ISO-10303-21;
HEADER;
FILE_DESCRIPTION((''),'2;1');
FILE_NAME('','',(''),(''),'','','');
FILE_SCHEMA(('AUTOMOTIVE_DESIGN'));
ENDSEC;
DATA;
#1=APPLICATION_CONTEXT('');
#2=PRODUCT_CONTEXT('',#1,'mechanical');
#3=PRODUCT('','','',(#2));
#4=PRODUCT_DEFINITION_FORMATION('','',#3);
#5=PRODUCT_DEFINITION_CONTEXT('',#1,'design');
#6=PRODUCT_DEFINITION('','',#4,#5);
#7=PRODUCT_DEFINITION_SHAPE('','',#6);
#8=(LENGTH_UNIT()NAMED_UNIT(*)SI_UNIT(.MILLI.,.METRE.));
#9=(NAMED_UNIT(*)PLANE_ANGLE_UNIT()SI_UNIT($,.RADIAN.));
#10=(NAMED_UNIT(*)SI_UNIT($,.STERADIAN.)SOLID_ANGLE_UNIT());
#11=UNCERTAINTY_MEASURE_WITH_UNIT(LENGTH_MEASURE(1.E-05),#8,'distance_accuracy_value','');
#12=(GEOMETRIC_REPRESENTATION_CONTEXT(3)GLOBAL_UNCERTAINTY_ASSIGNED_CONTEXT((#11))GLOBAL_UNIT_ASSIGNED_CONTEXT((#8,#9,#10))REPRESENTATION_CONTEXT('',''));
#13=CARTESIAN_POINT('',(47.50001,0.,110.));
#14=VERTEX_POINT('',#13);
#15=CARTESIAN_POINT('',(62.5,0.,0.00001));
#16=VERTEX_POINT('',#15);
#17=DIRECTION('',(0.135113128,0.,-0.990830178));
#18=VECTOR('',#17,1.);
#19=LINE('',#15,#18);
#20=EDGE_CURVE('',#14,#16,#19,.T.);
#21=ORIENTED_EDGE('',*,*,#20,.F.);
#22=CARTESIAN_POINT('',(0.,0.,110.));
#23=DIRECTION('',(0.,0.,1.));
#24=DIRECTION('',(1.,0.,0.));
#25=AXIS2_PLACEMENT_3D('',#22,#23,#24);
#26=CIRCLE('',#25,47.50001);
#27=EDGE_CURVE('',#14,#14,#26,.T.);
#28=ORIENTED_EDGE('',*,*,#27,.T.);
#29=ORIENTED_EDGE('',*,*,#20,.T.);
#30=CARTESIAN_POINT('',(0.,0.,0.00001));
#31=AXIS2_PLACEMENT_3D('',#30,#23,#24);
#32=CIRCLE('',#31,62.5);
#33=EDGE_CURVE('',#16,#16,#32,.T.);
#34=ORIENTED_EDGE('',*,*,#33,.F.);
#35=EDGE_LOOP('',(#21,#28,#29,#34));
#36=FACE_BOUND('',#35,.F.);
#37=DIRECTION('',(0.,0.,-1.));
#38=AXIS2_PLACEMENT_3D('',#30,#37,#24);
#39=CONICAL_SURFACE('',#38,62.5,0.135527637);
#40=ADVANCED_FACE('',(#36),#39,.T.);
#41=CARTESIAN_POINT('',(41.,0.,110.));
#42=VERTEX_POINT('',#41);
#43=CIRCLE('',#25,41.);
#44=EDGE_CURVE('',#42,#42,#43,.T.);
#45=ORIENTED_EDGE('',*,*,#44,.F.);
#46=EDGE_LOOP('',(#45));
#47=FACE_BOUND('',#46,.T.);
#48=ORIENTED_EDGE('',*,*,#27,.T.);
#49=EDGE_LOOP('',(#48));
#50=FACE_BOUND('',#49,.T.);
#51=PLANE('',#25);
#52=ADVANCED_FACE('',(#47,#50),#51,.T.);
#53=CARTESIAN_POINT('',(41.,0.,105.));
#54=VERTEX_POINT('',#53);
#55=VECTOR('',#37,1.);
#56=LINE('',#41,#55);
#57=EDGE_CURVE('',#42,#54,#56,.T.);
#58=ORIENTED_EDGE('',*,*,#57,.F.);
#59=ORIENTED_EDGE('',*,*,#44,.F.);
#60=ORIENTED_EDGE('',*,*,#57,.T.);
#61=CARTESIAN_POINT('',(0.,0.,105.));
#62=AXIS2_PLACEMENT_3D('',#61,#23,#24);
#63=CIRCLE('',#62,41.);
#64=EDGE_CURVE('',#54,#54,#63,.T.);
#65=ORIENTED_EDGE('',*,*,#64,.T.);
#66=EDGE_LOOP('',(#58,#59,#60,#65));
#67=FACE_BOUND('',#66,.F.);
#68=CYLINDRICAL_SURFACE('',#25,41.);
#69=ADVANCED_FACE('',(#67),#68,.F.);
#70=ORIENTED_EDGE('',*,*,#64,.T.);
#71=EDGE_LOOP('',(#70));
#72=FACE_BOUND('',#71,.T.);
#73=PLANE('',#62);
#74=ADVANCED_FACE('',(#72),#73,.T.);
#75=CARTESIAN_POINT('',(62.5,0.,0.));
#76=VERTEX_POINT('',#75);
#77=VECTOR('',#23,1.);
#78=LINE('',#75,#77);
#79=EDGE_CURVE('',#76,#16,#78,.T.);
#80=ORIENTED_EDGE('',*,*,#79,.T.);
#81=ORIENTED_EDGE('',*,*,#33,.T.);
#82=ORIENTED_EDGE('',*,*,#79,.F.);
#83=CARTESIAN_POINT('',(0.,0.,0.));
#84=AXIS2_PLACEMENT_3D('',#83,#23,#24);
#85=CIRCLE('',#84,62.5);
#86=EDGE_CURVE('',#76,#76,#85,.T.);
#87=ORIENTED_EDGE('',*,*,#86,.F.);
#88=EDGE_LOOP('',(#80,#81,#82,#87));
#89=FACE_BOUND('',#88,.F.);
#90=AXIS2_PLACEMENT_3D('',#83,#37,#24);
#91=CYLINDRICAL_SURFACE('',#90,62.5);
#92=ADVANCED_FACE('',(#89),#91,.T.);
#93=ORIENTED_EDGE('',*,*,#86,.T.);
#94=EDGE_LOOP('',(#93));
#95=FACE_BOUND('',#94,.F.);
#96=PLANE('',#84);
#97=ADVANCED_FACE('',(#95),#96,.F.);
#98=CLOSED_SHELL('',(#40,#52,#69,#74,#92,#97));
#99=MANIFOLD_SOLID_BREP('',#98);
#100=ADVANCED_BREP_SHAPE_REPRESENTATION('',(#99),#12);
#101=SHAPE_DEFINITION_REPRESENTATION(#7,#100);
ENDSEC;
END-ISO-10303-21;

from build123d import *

# Parameters (mm, degrees)
F0_R     = 62.5
F1_DEPTH = 110
F2_SIZE2 = 109.99999
F2_SIZE  = 14.99999
F3_R     = 41
F4_DEPTH = 5


# Not quite as in the source:
# - a fillet or chamfer is up to 0.001 mm smaller than in the source, because OpenCascade refuses the exact size


with BuildPart() as f1:
    # F0 (on Top) → F1 (new body)
    with BuildSketch(Plane.XY):
        Circle(F0_R)
    extrude(amount=F1_DEPTH)

    # F2 (size 15 and 110 in the source; OpenCascade refuses exactly that, so slightly less here)
    f2_edges = [f1.edges().sort_by_distance(p)[0] for p in [
        (-62.5, 0, 110),
    ]]
    f2_side = f1.faces().sort_by_distance((0, 0, 110))[0]
    chamfer(f2_edges, length=F2_SIZE, length2=F2_SIZE2, reference=f2_side)

    # F3 (on face) → F4 (cut)
    with BuildSketch(Plane.XY.offset(110)):
        Circle(F3_R)
    extrude(amount=-F4_DEPTH, mode=Mode.SUBTRACT)


solid = f1.part
